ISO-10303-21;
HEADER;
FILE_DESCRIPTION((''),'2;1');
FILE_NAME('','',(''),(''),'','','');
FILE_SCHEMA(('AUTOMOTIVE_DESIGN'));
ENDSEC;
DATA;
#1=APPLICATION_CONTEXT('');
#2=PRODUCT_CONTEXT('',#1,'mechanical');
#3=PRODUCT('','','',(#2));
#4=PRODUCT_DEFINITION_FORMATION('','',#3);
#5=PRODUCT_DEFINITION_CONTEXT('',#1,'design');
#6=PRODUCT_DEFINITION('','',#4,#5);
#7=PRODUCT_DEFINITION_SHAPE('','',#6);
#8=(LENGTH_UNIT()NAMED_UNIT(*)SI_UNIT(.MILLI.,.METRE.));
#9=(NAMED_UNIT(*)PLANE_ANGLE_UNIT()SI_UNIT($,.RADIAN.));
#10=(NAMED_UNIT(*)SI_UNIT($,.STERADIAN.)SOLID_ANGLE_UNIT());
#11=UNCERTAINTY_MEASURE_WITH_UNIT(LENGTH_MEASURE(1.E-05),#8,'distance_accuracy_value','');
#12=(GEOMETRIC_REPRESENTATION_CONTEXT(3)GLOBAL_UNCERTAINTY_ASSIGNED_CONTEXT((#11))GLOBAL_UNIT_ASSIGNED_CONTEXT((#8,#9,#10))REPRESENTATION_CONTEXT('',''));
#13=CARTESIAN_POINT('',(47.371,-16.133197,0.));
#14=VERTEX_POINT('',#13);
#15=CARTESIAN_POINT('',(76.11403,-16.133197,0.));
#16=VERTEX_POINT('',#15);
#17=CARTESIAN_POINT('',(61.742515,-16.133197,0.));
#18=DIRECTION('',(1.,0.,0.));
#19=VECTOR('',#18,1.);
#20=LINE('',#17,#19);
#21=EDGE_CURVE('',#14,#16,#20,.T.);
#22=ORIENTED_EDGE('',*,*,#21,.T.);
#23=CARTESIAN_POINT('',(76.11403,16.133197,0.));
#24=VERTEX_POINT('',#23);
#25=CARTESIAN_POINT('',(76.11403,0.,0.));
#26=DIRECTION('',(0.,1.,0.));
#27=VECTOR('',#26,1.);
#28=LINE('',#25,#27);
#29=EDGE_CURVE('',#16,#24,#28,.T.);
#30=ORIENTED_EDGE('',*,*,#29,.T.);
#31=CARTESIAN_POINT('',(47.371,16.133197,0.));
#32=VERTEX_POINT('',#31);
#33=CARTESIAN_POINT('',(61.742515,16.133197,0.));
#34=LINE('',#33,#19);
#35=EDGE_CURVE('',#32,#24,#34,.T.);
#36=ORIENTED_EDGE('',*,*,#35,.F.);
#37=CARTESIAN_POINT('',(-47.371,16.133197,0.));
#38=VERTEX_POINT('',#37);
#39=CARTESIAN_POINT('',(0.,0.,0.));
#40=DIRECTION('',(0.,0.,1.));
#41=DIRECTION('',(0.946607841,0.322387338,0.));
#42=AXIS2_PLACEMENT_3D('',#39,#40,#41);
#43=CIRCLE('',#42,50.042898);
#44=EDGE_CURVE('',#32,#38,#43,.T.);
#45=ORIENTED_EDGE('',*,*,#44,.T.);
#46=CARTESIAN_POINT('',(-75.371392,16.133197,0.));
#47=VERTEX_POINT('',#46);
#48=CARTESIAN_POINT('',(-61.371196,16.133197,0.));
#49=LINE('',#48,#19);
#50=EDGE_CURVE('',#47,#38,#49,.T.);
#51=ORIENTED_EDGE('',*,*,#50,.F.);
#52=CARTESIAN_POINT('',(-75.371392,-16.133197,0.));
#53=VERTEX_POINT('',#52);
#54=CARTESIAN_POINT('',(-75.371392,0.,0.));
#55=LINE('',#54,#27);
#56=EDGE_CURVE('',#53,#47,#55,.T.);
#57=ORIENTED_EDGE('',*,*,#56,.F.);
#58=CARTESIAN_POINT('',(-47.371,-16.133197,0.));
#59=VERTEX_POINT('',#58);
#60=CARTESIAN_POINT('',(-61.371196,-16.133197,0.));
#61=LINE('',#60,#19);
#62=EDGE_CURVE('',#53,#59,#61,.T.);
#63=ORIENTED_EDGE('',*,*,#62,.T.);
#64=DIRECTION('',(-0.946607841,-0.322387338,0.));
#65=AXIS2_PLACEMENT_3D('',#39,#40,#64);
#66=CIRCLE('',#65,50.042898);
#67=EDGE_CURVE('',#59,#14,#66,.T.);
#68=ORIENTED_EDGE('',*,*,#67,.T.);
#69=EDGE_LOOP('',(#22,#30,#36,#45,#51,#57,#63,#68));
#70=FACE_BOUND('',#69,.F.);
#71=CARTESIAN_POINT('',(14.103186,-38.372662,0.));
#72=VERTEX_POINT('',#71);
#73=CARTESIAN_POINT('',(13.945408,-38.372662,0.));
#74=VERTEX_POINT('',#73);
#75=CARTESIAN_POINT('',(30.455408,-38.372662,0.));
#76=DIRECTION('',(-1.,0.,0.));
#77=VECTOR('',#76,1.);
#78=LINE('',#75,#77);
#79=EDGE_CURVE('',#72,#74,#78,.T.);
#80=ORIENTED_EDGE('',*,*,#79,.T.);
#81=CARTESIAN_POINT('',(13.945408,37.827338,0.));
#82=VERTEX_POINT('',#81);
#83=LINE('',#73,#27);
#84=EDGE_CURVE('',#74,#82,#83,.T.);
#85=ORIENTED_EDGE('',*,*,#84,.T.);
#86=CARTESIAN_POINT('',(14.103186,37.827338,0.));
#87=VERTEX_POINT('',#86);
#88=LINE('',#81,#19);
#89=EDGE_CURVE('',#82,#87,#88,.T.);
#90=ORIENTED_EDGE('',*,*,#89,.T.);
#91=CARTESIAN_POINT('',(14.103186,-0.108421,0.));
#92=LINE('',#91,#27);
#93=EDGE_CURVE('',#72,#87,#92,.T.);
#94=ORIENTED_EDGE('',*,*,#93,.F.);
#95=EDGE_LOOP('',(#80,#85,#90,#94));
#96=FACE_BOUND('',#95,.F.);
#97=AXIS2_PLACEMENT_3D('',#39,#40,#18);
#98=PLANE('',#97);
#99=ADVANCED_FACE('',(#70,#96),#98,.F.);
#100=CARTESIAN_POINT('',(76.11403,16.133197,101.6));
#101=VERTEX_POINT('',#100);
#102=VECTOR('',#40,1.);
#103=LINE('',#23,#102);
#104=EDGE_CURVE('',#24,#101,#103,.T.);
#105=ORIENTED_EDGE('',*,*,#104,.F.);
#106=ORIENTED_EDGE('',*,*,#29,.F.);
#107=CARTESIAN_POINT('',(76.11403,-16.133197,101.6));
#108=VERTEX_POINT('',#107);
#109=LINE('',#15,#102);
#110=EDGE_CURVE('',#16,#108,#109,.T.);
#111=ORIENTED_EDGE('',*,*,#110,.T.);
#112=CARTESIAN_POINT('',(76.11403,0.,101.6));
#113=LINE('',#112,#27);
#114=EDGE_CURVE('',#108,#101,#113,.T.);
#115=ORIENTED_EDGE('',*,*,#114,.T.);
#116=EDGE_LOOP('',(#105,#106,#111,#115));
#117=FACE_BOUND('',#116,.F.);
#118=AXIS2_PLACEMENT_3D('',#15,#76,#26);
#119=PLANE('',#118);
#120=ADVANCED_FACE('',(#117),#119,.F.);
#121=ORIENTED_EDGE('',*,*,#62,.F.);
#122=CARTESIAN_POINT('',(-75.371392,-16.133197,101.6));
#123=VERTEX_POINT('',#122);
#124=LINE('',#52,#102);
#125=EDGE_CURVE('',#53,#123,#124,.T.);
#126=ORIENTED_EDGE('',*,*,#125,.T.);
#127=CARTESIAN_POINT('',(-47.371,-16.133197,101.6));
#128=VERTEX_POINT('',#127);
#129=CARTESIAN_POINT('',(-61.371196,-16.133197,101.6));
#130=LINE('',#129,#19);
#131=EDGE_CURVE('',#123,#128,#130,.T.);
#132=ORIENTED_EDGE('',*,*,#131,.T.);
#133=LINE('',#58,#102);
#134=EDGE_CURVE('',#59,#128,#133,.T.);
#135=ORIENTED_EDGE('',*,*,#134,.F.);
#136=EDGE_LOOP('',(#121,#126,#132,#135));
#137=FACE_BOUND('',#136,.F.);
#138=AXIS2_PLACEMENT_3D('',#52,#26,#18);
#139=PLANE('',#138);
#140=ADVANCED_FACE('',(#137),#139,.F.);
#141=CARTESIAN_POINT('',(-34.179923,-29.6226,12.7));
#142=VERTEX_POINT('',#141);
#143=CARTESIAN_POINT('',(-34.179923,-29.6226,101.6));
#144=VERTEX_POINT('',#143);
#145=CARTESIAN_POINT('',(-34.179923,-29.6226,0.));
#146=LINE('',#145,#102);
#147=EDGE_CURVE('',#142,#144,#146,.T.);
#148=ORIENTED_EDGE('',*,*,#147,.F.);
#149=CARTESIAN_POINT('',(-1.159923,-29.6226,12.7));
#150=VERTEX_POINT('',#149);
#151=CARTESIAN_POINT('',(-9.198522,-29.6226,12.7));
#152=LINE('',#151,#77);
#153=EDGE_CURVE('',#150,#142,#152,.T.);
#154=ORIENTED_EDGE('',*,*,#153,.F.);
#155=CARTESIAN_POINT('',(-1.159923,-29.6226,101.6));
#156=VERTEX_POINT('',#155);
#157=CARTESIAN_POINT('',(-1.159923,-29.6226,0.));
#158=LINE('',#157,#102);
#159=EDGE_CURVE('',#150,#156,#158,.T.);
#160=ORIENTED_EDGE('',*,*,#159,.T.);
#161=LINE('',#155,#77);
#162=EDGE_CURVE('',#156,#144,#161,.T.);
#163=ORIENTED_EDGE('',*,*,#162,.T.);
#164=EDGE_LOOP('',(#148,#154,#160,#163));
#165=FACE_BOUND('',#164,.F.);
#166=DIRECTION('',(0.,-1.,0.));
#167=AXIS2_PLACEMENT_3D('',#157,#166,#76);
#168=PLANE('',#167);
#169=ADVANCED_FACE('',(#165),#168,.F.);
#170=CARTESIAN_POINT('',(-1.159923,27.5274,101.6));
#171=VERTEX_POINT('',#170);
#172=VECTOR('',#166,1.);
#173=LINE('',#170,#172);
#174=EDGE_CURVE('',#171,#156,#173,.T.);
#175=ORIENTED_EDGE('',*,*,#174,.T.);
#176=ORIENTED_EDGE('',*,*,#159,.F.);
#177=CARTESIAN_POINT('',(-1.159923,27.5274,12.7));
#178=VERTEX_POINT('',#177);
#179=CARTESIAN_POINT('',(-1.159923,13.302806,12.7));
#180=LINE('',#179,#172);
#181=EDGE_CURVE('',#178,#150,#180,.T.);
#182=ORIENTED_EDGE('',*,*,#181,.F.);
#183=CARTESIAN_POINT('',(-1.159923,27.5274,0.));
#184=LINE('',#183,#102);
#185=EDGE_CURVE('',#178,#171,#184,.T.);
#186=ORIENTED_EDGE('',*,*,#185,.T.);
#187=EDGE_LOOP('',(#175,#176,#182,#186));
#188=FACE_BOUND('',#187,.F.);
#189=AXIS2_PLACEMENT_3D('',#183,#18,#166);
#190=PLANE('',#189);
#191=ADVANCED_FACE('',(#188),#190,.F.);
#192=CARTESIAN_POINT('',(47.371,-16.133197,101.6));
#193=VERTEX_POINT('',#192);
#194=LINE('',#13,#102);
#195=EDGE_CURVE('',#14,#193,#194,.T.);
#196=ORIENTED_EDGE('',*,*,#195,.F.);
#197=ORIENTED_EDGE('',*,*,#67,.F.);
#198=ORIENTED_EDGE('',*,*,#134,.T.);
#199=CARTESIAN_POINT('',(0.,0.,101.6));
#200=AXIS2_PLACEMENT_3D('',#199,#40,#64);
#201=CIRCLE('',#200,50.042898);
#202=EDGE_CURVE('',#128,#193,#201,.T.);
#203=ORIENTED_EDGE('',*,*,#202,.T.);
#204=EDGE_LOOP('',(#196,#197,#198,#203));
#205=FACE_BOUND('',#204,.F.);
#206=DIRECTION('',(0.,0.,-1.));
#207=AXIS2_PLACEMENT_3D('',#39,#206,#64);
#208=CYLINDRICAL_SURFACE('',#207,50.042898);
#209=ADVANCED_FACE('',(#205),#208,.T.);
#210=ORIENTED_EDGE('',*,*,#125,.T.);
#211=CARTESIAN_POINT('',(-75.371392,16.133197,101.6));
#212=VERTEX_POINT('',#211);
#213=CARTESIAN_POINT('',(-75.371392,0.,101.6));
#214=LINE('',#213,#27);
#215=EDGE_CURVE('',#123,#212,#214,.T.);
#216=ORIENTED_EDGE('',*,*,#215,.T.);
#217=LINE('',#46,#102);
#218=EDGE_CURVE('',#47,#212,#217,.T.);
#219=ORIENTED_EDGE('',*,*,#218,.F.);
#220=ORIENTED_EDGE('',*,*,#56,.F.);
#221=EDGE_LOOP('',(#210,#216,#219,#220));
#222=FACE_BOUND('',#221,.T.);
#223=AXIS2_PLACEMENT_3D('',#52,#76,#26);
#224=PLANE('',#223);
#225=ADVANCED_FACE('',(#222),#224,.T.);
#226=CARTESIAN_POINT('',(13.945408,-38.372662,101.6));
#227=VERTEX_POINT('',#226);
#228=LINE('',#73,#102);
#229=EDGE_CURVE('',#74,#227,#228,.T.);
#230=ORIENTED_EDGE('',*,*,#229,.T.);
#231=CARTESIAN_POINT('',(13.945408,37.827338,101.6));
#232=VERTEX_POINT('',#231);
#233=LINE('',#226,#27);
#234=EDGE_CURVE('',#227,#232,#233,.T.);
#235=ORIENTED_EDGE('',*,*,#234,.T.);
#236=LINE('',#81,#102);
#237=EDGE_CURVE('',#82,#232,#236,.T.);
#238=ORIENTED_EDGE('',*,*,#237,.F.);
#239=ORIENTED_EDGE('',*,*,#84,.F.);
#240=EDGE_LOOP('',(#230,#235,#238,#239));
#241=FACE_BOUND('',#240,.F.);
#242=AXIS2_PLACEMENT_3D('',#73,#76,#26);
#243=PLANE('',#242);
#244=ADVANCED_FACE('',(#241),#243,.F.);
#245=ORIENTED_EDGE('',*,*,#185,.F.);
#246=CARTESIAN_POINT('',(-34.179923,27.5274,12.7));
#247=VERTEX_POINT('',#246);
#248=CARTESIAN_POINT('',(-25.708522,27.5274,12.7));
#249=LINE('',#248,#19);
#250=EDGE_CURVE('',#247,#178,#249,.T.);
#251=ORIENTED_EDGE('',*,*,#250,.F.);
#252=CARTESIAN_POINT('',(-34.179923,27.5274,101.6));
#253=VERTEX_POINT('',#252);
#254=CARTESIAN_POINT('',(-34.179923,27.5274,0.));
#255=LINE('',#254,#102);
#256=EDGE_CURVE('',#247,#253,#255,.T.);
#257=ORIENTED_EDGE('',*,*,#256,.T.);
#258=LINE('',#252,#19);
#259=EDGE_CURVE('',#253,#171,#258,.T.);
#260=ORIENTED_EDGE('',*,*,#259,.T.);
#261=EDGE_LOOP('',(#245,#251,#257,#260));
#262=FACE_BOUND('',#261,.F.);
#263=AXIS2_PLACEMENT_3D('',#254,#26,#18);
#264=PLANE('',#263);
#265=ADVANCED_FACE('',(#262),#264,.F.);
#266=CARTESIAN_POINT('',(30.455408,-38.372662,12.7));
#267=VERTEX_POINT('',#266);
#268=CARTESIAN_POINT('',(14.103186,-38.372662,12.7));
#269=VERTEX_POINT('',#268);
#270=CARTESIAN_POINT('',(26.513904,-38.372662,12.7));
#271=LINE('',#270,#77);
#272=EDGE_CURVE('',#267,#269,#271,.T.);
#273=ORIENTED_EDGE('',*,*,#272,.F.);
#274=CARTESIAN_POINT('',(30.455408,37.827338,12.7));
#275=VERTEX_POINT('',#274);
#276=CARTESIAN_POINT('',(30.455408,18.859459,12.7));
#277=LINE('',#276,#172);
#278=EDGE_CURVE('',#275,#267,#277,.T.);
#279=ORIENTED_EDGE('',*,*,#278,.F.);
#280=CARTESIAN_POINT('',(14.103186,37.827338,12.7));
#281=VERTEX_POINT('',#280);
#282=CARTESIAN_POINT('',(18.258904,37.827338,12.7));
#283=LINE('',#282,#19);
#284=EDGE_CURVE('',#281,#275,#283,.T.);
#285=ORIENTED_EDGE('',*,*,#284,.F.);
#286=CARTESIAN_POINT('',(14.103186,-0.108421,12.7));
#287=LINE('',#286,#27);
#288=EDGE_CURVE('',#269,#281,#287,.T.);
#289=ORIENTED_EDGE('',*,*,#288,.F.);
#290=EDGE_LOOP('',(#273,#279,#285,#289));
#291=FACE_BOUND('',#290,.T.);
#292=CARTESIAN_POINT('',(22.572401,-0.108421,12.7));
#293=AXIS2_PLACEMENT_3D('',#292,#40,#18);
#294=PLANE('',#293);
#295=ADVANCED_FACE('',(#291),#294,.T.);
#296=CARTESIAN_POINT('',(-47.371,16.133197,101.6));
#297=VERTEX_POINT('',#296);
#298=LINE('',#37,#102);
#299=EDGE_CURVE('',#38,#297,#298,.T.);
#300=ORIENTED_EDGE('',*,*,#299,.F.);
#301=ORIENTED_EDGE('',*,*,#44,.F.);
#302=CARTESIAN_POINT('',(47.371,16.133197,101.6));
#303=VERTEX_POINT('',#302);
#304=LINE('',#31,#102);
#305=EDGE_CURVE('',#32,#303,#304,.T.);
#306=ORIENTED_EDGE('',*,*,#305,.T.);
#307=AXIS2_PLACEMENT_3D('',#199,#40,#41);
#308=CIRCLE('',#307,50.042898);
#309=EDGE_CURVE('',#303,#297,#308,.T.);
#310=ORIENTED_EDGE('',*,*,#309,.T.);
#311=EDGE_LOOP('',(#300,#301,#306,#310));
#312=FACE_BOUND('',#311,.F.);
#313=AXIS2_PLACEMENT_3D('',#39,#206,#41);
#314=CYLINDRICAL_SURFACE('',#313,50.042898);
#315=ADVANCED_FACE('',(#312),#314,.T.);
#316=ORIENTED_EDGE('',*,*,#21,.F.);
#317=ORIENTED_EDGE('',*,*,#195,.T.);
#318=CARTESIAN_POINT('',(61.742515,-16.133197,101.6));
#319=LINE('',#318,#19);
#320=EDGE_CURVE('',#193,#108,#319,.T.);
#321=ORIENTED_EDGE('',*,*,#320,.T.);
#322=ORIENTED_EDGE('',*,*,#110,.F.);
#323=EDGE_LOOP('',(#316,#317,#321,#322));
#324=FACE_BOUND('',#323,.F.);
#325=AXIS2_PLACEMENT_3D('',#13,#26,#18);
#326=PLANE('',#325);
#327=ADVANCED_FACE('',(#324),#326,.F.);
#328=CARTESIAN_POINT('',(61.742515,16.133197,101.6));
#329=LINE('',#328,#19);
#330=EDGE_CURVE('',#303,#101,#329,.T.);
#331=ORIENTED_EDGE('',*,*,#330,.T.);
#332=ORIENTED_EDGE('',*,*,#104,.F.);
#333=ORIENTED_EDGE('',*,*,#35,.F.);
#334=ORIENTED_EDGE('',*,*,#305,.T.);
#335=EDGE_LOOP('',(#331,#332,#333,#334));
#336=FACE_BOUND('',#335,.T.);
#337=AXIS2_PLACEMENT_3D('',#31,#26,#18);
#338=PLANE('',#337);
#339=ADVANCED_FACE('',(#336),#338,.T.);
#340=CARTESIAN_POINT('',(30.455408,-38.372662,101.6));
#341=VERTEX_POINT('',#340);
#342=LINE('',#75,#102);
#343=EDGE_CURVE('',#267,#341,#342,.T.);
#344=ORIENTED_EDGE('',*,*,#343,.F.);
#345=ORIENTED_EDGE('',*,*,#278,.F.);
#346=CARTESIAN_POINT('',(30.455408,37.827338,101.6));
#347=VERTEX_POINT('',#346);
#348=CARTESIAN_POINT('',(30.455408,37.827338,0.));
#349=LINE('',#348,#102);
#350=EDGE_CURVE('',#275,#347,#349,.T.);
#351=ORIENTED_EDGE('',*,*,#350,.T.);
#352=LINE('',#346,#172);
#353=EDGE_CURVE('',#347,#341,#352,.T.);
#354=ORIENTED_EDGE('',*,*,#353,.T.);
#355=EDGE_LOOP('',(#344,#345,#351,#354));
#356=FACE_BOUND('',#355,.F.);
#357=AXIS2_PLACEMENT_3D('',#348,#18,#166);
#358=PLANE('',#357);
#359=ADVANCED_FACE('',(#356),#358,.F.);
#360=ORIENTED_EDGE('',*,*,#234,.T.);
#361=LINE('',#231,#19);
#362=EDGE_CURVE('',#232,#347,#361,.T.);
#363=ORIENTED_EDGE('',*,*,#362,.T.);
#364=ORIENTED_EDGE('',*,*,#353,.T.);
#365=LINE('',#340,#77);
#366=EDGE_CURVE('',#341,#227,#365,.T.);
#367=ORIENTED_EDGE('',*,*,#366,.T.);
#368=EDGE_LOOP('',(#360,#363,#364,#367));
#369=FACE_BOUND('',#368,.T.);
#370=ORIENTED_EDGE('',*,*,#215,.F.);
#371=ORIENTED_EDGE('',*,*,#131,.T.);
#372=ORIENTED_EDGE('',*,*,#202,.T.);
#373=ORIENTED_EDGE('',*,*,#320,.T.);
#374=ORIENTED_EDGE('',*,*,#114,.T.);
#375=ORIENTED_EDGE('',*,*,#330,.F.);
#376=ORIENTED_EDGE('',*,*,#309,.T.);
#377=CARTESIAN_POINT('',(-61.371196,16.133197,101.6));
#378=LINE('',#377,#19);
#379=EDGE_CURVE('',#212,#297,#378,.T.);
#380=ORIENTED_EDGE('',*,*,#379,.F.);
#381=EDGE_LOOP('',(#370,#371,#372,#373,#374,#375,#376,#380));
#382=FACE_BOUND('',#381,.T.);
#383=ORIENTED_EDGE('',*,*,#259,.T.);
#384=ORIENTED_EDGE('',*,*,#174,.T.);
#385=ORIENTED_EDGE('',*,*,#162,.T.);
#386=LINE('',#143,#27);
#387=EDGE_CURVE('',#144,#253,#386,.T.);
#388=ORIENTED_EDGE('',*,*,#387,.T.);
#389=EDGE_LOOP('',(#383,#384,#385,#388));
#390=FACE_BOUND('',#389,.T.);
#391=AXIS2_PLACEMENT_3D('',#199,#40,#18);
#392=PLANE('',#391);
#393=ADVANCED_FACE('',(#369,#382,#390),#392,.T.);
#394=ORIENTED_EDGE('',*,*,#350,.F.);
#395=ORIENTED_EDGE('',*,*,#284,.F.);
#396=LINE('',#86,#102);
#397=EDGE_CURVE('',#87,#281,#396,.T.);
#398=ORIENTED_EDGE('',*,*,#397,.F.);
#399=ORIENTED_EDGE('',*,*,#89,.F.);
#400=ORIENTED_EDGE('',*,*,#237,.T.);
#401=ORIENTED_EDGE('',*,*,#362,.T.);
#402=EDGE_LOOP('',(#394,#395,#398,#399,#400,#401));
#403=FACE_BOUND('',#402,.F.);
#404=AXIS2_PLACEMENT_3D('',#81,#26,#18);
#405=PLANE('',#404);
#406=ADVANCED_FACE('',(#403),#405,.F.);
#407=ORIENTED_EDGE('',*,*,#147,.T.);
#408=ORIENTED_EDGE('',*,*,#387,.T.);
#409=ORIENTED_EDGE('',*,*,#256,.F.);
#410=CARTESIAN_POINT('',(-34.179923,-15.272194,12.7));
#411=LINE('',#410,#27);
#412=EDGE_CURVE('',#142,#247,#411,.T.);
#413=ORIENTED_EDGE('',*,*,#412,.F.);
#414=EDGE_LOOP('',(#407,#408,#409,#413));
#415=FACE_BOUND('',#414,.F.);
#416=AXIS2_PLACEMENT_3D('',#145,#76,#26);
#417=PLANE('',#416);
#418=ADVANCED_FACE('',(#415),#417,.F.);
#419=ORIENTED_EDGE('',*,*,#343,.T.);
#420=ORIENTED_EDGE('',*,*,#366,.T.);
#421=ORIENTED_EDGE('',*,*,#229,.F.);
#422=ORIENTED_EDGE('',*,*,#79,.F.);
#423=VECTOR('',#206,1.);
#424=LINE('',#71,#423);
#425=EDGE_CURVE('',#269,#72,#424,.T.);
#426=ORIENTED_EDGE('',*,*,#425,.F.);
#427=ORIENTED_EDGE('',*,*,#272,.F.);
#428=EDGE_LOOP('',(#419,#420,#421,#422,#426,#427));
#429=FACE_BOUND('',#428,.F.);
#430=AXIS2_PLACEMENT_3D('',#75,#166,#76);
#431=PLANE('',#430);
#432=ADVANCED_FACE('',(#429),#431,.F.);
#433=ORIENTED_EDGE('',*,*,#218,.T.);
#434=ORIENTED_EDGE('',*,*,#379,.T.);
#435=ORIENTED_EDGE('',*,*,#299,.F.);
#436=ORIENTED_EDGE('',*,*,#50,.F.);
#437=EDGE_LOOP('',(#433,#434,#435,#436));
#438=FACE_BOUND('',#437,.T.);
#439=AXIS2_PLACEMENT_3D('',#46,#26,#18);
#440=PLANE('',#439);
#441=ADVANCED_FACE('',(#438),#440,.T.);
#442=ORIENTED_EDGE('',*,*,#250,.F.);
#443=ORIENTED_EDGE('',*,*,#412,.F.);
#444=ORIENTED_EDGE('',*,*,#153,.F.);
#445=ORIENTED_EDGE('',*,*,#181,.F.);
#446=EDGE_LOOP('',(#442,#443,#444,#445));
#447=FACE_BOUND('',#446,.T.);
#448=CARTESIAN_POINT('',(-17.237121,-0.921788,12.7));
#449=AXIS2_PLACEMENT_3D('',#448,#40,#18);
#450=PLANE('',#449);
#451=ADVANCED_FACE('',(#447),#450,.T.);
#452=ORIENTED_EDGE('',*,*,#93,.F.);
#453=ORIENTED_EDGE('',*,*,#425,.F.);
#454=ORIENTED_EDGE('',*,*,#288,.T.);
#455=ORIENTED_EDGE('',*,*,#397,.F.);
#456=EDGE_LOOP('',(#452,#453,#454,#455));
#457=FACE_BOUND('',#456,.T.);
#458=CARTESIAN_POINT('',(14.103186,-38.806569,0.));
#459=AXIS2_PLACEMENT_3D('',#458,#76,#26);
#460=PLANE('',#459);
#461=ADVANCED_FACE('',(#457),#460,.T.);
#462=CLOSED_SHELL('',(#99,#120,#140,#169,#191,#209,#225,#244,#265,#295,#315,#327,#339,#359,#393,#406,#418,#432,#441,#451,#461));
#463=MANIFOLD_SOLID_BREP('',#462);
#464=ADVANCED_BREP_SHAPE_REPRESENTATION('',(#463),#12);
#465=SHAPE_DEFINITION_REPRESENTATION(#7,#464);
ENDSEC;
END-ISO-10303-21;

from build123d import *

# Parameters (mm, degrees)
F0_W     = 28.0003916717
F0_H     = 32.2663935487
F0_W_2   = 28.7430296161
F1_DEPTH = 101.6
F2_W     = 34.6587272506
F2_H     = 58.0717623234
F2_W_2   = 16.9384283945
F2_H_2   = 77.3962959647
F3_DEPTH = 12.7


# Not quite as in the source:
# - a feature names something its author has since deleted; it is built from what else it names


with BuildPart() as f1:
    # F0 (on Top) → F1 (new body)
    with BuildSketch(Plane.XY):
        with BuildLine():
            Line((-47.371, 16.1331967744), (-47.371, -16.1331967744))
            ThreePointArc((-47.371, -16.1331967744), (0, -50.0428983889), (47.371, -16.1331967744))
            Line((47.371, -16.1331967744), (47.371, 16.1331967744))
            ThreePointArc((47.371, 16.1331967744), (0, 50.0428983889), (-47.371, 16.1331967744))
        make_face()
        Polygon((-34.1799231236, -29.6225996721), (-34.1799231236, 27.5274003279), (-1.1599231236, 27.5274003279), (-1.1599231236, -29.6225996721), (-8.1120360752, -29.6225996721), align=None, mode=Mode.SUBTRACT)
        Polygon((13.945407662, -38.3726616568), (13.945407662, 37.8273383432), (30.455407662, 37.8273383432), (30.455407662, -38.3726616568), (18.8453282475, -38.3726616568), align=None, mode=Mode.SUBTRACT)
        with Locations((-61.3711958359, 0)):
            Rectangle(F0_W, F0_H)
        with Locations((61.7425148081, 0)):
            Rectangle(F0_W_2, F0_H)
    extrude(amount=F1_DEPTH)

    # F2 (on Top) → F3 (join)
    with BuildSketch(Plane.XY):
        with Locations((-17.2371207664, -0.9217876941)):
            Rectangle(F2_W, F2_H)
        with Locations((22.572400514, -0.1084208488)):
            Rectangle(F2_W_2, F2_H_2)
    extrude(amount=F3_DEPTH)


solid = f1.part
